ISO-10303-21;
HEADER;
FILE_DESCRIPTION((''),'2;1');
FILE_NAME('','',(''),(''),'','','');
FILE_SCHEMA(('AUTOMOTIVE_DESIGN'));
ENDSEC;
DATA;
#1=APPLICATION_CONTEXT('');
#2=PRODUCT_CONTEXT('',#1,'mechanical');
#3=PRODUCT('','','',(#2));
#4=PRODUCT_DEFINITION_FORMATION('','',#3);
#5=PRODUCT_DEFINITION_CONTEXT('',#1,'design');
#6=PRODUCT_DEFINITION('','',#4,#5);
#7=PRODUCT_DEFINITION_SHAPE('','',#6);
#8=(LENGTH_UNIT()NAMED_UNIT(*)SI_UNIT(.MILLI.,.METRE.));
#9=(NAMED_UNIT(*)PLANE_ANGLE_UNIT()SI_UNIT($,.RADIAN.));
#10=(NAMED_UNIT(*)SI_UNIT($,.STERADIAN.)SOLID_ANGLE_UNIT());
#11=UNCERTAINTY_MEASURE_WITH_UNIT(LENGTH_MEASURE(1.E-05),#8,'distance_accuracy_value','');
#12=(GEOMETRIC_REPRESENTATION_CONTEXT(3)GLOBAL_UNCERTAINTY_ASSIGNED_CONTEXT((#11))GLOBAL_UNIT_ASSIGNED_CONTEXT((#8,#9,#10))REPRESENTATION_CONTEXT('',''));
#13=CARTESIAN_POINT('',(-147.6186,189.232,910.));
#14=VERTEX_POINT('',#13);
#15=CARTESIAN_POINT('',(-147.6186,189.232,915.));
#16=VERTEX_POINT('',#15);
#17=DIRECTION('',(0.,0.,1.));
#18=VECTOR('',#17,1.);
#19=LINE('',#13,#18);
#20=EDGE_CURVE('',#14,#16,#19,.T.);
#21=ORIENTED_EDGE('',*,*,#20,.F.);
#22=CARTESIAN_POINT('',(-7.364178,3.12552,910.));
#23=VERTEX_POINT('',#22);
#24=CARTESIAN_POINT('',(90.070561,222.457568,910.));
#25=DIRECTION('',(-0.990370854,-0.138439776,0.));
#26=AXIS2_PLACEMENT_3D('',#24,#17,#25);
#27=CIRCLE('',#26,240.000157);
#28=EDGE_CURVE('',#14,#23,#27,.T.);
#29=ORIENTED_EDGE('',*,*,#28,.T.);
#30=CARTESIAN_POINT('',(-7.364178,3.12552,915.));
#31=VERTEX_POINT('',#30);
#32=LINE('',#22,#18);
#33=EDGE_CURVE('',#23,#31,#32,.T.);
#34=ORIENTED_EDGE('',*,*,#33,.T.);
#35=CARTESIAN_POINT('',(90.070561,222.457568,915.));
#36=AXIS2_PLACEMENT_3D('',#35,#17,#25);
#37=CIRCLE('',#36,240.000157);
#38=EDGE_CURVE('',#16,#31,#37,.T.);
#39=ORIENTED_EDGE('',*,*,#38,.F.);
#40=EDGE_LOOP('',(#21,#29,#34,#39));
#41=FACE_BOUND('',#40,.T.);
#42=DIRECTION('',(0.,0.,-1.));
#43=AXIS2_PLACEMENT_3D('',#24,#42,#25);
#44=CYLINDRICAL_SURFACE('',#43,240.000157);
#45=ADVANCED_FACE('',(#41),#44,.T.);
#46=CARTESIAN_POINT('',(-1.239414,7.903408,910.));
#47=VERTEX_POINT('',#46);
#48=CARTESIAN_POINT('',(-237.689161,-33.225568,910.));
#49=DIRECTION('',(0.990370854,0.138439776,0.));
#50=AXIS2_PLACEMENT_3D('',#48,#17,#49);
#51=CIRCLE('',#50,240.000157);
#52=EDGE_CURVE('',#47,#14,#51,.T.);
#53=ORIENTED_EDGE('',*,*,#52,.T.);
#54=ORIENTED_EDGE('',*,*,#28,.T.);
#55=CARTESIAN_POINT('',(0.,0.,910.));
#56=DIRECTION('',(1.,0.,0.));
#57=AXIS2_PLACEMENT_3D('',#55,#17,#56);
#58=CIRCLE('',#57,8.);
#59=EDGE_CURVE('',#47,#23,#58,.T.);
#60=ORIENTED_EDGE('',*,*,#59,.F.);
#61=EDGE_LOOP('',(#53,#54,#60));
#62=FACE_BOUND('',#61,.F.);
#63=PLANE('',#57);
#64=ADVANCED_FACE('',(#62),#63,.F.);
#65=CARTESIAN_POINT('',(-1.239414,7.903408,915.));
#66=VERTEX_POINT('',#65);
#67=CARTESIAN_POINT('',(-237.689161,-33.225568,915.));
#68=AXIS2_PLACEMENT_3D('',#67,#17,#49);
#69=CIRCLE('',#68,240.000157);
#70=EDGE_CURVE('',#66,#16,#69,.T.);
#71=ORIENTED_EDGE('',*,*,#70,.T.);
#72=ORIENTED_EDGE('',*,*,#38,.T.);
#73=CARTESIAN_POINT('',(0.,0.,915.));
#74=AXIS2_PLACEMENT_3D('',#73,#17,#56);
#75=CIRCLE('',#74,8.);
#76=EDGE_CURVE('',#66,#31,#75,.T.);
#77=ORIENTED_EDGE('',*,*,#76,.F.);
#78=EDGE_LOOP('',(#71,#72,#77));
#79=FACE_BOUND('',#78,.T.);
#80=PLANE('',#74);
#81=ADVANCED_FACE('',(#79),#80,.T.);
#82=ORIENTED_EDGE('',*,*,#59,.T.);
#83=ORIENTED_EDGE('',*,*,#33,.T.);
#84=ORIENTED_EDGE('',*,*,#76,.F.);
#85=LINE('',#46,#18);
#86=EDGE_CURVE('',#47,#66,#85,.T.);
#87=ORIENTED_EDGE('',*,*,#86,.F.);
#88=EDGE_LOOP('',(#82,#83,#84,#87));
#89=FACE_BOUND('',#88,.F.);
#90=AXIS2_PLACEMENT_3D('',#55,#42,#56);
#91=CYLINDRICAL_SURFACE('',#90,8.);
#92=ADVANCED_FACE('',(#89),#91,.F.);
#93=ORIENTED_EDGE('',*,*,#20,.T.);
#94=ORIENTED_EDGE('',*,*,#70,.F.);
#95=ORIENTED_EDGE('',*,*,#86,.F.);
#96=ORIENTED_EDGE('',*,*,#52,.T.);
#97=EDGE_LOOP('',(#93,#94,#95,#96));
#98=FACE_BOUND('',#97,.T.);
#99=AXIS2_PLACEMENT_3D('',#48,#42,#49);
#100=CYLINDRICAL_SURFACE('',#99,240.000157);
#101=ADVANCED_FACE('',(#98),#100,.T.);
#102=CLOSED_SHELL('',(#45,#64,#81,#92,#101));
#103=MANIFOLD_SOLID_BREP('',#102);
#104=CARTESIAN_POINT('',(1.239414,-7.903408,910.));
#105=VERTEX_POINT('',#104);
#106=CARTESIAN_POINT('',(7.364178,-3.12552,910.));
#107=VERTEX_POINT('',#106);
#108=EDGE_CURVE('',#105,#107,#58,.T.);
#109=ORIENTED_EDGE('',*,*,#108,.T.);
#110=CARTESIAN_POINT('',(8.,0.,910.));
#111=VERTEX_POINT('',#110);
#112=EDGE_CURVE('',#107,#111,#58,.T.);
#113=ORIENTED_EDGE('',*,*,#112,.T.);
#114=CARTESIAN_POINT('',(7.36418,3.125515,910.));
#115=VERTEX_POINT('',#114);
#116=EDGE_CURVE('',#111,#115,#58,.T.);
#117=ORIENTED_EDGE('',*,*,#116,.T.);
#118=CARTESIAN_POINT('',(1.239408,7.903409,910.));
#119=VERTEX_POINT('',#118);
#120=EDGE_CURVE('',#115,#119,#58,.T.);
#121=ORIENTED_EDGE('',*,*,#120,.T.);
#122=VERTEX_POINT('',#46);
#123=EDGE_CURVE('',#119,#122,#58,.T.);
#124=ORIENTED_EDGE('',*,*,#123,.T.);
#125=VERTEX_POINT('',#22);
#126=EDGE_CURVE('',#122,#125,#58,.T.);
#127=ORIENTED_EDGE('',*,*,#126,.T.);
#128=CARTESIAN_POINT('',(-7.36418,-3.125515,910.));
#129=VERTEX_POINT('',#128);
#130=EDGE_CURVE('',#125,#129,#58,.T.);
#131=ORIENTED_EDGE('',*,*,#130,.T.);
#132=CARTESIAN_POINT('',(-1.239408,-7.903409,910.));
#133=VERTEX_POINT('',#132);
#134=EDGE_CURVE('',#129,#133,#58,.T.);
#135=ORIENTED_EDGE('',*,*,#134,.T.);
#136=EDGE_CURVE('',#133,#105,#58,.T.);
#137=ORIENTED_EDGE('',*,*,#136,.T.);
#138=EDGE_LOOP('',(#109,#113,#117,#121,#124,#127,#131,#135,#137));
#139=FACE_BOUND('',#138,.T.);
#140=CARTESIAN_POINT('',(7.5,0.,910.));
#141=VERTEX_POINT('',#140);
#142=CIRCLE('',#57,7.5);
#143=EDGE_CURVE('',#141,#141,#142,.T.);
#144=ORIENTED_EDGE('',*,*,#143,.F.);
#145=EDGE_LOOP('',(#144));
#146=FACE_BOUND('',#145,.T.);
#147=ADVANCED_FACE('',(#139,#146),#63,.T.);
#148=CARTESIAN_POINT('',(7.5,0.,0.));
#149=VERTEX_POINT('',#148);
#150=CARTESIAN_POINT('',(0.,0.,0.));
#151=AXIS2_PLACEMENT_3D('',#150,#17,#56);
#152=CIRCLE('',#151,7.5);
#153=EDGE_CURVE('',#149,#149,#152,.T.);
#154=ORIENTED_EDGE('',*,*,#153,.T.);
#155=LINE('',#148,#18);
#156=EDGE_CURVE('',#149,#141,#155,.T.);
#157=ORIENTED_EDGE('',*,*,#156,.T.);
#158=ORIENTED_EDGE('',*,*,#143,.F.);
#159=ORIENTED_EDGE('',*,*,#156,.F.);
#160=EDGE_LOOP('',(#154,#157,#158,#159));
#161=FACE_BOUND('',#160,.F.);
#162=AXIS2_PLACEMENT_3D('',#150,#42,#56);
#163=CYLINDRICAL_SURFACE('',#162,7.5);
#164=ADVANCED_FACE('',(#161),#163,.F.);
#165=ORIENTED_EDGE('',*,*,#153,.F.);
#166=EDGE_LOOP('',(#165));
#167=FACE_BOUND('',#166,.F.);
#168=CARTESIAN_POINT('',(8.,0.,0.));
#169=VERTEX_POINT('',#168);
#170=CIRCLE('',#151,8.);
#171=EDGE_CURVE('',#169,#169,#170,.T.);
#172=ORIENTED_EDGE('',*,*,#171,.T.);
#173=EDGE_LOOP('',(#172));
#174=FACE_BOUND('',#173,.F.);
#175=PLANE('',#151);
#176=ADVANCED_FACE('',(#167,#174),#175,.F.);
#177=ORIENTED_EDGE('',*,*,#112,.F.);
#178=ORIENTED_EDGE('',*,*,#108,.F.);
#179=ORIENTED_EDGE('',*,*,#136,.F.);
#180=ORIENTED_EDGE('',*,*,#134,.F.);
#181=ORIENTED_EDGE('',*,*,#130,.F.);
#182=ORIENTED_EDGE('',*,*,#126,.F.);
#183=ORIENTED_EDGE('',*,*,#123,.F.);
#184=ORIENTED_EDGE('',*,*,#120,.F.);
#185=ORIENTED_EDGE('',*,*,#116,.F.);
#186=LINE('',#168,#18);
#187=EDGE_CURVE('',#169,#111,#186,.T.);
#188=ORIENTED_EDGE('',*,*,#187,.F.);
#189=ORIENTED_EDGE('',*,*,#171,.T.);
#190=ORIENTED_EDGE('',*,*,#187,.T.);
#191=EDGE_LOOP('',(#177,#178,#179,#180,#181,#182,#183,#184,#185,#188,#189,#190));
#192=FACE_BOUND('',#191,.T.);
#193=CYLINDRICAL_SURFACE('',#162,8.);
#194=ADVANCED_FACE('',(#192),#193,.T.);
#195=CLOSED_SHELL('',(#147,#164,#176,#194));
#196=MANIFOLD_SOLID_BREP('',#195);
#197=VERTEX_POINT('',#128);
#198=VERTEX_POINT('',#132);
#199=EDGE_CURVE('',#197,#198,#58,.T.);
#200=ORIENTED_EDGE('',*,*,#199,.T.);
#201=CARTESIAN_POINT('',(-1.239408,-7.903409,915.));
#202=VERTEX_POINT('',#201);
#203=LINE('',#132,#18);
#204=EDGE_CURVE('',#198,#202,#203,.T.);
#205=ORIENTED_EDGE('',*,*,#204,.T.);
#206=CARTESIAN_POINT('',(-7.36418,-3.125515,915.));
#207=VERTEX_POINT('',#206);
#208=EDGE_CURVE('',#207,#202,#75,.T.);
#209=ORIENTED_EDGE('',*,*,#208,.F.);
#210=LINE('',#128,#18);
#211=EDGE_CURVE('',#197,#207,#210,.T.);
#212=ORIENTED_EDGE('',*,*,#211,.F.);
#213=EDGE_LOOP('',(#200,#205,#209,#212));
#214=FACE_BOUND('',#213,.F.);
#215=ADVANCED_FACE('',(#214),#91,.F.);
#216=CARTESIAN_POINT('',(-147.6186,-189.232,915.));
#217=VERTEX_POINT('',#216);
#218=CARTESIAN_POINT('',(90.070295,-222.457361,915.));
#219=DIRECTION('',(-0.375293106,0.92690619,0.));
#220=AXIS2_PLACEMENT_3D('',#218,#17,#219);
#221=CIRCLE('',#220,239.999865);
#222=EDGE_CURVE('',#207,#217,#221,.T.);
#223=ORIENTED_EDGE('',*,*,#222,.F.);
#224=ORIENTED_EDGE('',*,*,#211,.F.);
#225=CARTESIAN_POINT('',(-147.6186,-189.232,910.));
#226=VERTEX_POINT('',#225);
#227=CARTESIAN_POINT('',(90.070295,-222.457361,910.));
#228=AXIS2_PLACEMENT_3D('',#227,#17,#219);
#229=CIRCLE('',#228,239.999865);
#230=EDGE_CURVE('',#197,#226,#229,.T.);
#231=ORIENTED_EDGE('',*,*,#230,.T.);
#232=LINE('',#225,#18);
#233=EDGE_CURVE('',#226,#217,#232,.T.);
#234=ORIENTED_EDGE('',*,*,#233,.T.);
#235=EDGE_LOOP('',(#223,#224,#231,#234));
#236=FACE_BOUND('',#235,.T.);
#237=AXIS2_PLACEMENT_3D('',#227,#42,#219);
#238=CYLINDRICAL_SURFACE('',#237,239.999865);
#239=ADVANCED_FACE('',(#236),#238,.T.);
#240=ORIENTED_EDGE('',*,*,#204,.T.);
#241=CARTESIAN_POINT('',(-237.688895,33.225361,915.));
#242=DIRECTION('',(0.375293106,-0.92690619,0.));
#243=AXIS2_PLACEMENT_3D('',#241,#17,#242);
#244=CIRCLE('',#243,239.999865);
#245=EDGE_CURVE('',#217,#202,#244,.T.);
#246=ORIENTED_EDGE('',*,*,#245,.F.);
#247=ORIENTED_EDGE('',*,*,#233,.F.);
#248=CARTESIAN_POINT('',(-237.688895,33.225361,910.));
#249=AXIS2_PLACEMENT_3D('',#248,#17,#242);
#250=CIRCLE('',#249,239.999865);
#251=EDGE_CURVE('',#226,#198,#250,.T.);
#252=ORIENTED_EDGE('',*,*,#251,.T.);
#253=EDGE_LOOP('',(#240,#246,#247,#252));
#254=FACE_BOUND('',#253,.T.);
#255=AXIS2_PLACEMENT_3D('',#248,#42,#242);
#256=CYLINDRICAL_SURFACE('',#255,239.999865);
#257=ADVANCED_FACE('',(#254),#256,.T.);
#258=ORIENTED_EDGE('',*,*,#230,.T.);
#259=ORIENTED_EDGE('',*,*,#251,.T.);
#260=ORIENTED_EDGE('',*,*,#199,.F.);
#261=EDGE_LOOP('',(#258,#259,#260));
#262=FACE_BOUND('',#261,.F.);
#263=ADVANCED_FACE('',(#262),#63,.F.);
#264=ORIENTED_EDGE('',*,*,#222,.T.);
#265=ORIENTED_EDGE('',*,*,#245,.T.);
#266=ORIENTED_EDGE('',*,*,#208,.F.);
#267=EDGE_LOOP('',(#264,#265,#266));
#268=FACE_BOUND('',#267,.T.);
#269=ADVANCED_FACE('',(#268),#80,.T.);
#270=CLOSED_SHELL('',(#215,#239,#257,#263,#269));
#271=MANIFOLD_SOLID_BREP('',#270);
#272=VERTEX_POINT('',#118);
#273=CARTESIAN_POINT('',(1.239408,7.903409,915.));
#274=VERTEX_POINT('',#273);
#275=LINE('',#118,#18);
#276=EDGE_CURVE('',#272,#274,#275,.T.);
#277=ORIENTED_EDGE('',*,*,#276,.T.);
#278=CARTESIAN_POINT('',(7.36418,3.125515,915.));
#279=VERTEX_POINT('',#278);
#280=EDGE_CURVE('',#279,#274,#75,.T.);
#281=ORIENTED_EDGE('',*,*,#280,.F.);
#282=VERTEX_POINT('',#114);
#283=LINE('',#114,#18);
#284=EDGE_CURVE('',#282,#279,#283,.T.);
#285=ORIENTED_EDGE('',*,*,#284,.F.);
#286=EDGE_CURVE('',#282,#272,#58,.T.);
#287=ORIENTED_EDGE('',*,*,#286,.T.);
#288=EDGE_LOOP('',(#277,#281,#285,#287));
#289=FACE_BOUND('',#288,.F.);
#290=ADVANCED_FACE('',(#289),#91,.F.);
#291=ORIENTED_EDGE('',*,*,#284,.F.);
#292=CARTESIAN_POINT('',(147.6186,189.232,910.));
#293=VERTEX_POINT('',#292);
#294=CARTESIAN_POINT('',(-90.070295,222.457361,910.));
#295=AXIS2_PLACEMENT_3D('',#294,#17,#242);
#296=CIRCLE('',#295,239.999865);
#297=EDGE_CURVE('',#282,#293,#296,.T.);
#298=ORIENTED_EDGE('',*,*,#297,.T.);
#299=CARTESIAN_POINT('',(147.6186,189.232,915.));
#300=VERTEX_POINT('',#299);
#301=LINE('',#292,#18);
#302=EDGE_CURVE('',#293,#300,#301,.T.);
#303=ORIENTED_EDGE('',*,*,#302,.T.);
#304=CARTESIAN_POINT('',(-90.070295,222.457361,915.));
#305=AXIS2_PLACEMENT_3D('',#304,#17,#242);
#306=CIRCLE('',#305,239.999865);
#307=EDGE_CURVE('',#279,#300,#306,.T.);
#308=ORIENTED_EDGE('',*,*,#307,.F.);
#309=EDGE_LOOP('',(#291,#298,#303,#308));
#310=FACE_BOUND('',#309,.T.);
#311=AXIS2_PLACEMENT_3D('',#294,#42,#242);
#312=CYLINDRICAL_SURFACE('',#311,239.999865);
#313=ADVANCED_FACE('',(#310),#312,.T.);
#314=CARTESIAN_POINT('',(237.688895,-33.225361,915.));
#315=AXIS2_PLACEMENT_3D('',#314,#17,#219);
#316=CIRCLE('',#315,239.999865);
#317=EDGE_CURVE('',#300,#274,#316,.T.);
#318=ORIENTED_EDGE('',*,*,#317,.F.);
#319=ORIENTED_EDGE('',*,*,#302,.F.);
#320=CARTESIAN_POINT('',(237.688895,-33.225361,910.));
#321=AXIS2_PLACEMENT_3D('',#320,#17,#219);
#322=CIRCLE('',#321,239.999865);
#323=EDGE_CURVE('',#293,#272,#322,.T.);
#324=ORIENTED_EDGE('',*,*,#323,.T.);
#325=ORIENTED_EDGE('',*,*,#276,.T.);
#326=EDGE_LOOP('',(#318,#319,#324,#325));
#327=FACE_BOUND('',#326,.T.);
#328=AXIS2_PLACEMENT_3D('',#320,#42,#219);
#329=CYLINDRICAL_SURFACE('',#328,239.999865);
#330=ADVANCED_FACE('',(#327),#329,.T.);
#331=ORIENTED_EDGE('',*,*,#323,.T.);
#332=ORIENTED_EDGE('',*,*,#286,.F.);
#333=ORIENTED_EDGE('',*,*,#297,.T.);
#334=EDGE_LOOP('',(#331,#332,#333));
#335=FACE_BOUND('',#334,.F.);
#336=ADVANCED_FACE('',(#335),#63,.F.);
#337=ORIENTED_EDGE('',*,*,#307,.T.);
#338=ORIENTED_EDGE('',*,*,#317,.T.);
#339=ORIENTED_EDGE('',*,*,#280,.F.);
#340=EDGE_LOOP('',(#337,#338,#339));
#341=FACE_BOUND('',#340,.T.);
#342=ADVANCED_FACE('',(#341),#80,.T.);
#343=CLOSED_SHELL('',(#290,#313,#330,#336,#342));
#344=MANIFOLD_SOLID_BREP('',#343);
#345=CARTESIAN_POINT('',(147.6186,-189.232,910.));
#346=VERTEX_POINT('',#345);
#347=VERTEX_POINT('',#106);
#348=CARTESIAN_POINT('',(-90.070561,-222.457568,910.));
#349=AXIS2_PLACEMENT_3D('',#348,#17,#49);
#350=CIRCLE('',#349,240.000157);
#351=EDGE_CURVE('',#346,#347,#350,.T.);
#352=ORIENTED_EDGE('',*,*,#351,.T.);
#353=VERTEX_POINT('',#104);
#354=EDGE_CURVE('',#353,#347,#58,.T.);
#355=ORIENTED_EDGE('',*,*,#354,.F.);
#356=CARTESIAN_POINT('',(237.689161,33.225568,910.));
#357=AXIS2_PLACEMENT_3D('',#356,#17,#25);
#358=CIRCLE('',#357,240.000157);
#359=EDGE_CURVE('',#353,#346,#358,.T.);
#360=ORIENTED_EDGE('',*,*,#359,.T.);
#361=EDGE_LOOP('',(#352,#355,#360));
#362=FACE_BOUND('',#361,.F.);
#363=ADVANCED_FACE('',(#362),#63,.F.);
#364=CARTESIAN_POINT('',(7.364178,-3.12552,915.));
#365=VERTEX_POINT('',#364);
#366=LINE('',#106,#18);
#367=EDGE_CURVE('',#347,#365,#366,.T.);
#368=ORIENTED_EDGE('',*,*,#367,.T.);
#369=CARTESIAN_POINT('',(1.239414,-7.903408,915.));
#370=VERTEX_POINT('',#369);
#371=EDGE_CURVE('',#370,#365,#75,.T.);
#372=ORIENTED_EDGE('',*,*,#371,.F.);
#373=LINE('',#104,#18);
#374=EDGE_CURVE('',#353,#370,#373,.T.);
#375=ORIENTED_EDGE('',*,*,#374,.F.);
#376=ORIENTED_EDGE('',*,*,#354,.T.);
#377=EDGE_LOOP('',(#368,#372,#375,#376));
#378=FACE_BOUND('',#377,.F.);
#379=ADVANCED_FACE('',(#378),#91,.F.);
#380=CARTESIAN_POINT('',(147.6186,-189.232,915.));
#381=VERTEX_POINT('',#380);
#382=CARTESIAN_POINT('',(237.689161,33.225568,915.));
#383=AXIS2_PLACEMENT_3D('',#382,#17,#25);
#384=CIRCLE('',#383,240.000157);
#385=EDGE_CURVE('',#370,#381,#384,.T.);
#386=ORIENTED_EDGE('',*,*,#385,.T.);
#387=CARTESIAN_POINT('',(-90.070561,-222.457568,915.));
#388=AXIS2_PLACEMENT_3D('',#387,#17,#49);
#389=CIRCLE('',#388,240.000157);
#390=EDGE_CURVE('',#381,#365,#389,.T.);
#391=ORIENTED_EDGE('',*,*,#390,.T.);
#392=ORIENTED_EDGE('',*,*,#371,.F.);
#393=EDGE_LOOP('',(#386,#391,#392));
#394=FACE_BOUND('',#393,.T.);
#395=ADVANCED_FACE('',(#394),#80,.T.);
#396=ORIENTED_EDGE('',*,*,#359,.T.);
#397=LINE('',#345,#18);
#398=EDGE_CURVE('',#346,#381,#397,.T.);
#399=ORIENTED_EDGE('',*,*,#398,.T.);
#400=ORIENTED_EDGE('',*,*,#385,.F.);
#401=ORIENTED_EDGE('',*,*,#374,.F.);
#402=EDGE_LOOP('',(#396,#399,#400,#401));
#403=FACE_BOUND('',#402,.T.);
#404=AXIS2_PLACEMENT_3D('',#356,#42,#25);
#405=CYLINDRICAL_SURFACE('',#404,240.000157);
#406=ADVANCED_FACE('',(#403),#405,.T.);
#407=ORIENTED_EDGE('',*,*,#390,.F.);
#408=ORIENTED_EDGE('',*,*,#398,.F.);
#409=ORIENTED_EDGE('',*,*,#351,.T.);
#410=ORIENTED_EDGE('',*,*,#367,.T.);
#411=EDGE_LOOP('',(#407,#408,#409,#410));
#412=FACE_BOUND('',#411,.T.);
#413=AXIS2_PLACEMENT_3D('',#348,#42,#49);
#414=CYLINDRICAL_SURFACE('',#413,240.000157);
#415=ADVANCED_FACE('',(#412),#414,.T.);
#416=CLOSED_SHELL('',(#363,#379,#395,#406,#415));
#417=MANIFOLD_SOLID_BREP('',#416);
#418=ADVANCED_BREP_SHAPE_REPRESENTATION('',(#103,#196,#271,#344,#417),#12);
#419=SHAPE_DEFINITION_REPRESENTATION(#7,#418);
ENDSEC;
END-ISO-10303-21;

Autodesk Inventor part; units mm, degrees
ref_plane "YZ Plane" through (0, 0, 0) normal (1, 0, 0) x (0, 1, 0)
ref_plane "XZ Plane" through (0, 0, 0) normal (0, 1, 0) x (-1, 0, 0)
ref_plane "XY Plane" through (0, 0, 0) normal (0, 0, 1) x (1, 0, 0)
sketch "Sketch1" plane through (0, 0, 0) normal (0, 0, 1) x (1, 0, 0)
  circle A0 centre (0, 0) radius 7.5
  circle A1 centre (0, 0) radius 8
  dimension "d0" = 15
  dimension "d1" = 16
extrude "Extrusion1" add sketch "Sketch1" along normal blind 910
sketch "Sketch2" plane through (0, 0, 910) normal (0, 0, 1) x (1, 0, 0)
  circle A0 centre (0, 0) radius 8 projected
  arc A1 (147.6186, 189.232) -> (0, 0) centre (237.689, -33.2255) ccw
  arc A2 (0, 0) -> (147.6186, 189.232) centre (-90.0704, 222.4575) ccw
  line L0 (0, 102.2554) -> (0, 81.5536) construction
  arc A3 (0, 0) -> (-147.6186, 189.232) centre (-237.689, -33.2255) ccw
  arc A4 (-147.6186, 189.232) -> (0, 0) centre (90.0704, 222.4575) ccw
  line L1 (-25.0323, 0) -> (60.2591, 0) construction
  arc A5 (0, 0) -> (147.6186, -189.232) centre (237.689, 33.2255) ccw
  arc A6 (147.6186, -189.232) -> (0, 0) centre (-90.0704, -222.4575) ccw
  arc A7 (-147.6186, -189.232) -> (0, 0) centre (-237.689, 33.2255) ccw
  arc A8 (0, 0) -> (-147.6186, -189.232) centre (90.0704, -222.4575) ccw
  point P0 (-7.3642, -3.1255)
  point P1 (-1.2394, -7.9034)
  point P2 (7.3642, -3.1255)
  point P3 (1.2394, -7.9034)
  point P4 (7.3642, 3.1255)
  point P5 (1.2394, 7.9034)
  point P6 (-7.3642, 3.1255)
  point P7 (-1.2394, 7.9034)
  dimension "d17" = 240
  dimension "d18" = 240
  dimension "d19" = 240
extrude "Extrusion3" add sketch "Sketch2" along normal blind 5 contours A0 A1 A2 | A6 A5 A0 | A0 A4 A3 | A7 A8 A0 picked at (63.8091, 98.9231) picked at (80.4206, -85.9646) picked at (-80.4206, 85.9646) picked at (-63.8091, -98.9231)
properties part number "ranpro"
